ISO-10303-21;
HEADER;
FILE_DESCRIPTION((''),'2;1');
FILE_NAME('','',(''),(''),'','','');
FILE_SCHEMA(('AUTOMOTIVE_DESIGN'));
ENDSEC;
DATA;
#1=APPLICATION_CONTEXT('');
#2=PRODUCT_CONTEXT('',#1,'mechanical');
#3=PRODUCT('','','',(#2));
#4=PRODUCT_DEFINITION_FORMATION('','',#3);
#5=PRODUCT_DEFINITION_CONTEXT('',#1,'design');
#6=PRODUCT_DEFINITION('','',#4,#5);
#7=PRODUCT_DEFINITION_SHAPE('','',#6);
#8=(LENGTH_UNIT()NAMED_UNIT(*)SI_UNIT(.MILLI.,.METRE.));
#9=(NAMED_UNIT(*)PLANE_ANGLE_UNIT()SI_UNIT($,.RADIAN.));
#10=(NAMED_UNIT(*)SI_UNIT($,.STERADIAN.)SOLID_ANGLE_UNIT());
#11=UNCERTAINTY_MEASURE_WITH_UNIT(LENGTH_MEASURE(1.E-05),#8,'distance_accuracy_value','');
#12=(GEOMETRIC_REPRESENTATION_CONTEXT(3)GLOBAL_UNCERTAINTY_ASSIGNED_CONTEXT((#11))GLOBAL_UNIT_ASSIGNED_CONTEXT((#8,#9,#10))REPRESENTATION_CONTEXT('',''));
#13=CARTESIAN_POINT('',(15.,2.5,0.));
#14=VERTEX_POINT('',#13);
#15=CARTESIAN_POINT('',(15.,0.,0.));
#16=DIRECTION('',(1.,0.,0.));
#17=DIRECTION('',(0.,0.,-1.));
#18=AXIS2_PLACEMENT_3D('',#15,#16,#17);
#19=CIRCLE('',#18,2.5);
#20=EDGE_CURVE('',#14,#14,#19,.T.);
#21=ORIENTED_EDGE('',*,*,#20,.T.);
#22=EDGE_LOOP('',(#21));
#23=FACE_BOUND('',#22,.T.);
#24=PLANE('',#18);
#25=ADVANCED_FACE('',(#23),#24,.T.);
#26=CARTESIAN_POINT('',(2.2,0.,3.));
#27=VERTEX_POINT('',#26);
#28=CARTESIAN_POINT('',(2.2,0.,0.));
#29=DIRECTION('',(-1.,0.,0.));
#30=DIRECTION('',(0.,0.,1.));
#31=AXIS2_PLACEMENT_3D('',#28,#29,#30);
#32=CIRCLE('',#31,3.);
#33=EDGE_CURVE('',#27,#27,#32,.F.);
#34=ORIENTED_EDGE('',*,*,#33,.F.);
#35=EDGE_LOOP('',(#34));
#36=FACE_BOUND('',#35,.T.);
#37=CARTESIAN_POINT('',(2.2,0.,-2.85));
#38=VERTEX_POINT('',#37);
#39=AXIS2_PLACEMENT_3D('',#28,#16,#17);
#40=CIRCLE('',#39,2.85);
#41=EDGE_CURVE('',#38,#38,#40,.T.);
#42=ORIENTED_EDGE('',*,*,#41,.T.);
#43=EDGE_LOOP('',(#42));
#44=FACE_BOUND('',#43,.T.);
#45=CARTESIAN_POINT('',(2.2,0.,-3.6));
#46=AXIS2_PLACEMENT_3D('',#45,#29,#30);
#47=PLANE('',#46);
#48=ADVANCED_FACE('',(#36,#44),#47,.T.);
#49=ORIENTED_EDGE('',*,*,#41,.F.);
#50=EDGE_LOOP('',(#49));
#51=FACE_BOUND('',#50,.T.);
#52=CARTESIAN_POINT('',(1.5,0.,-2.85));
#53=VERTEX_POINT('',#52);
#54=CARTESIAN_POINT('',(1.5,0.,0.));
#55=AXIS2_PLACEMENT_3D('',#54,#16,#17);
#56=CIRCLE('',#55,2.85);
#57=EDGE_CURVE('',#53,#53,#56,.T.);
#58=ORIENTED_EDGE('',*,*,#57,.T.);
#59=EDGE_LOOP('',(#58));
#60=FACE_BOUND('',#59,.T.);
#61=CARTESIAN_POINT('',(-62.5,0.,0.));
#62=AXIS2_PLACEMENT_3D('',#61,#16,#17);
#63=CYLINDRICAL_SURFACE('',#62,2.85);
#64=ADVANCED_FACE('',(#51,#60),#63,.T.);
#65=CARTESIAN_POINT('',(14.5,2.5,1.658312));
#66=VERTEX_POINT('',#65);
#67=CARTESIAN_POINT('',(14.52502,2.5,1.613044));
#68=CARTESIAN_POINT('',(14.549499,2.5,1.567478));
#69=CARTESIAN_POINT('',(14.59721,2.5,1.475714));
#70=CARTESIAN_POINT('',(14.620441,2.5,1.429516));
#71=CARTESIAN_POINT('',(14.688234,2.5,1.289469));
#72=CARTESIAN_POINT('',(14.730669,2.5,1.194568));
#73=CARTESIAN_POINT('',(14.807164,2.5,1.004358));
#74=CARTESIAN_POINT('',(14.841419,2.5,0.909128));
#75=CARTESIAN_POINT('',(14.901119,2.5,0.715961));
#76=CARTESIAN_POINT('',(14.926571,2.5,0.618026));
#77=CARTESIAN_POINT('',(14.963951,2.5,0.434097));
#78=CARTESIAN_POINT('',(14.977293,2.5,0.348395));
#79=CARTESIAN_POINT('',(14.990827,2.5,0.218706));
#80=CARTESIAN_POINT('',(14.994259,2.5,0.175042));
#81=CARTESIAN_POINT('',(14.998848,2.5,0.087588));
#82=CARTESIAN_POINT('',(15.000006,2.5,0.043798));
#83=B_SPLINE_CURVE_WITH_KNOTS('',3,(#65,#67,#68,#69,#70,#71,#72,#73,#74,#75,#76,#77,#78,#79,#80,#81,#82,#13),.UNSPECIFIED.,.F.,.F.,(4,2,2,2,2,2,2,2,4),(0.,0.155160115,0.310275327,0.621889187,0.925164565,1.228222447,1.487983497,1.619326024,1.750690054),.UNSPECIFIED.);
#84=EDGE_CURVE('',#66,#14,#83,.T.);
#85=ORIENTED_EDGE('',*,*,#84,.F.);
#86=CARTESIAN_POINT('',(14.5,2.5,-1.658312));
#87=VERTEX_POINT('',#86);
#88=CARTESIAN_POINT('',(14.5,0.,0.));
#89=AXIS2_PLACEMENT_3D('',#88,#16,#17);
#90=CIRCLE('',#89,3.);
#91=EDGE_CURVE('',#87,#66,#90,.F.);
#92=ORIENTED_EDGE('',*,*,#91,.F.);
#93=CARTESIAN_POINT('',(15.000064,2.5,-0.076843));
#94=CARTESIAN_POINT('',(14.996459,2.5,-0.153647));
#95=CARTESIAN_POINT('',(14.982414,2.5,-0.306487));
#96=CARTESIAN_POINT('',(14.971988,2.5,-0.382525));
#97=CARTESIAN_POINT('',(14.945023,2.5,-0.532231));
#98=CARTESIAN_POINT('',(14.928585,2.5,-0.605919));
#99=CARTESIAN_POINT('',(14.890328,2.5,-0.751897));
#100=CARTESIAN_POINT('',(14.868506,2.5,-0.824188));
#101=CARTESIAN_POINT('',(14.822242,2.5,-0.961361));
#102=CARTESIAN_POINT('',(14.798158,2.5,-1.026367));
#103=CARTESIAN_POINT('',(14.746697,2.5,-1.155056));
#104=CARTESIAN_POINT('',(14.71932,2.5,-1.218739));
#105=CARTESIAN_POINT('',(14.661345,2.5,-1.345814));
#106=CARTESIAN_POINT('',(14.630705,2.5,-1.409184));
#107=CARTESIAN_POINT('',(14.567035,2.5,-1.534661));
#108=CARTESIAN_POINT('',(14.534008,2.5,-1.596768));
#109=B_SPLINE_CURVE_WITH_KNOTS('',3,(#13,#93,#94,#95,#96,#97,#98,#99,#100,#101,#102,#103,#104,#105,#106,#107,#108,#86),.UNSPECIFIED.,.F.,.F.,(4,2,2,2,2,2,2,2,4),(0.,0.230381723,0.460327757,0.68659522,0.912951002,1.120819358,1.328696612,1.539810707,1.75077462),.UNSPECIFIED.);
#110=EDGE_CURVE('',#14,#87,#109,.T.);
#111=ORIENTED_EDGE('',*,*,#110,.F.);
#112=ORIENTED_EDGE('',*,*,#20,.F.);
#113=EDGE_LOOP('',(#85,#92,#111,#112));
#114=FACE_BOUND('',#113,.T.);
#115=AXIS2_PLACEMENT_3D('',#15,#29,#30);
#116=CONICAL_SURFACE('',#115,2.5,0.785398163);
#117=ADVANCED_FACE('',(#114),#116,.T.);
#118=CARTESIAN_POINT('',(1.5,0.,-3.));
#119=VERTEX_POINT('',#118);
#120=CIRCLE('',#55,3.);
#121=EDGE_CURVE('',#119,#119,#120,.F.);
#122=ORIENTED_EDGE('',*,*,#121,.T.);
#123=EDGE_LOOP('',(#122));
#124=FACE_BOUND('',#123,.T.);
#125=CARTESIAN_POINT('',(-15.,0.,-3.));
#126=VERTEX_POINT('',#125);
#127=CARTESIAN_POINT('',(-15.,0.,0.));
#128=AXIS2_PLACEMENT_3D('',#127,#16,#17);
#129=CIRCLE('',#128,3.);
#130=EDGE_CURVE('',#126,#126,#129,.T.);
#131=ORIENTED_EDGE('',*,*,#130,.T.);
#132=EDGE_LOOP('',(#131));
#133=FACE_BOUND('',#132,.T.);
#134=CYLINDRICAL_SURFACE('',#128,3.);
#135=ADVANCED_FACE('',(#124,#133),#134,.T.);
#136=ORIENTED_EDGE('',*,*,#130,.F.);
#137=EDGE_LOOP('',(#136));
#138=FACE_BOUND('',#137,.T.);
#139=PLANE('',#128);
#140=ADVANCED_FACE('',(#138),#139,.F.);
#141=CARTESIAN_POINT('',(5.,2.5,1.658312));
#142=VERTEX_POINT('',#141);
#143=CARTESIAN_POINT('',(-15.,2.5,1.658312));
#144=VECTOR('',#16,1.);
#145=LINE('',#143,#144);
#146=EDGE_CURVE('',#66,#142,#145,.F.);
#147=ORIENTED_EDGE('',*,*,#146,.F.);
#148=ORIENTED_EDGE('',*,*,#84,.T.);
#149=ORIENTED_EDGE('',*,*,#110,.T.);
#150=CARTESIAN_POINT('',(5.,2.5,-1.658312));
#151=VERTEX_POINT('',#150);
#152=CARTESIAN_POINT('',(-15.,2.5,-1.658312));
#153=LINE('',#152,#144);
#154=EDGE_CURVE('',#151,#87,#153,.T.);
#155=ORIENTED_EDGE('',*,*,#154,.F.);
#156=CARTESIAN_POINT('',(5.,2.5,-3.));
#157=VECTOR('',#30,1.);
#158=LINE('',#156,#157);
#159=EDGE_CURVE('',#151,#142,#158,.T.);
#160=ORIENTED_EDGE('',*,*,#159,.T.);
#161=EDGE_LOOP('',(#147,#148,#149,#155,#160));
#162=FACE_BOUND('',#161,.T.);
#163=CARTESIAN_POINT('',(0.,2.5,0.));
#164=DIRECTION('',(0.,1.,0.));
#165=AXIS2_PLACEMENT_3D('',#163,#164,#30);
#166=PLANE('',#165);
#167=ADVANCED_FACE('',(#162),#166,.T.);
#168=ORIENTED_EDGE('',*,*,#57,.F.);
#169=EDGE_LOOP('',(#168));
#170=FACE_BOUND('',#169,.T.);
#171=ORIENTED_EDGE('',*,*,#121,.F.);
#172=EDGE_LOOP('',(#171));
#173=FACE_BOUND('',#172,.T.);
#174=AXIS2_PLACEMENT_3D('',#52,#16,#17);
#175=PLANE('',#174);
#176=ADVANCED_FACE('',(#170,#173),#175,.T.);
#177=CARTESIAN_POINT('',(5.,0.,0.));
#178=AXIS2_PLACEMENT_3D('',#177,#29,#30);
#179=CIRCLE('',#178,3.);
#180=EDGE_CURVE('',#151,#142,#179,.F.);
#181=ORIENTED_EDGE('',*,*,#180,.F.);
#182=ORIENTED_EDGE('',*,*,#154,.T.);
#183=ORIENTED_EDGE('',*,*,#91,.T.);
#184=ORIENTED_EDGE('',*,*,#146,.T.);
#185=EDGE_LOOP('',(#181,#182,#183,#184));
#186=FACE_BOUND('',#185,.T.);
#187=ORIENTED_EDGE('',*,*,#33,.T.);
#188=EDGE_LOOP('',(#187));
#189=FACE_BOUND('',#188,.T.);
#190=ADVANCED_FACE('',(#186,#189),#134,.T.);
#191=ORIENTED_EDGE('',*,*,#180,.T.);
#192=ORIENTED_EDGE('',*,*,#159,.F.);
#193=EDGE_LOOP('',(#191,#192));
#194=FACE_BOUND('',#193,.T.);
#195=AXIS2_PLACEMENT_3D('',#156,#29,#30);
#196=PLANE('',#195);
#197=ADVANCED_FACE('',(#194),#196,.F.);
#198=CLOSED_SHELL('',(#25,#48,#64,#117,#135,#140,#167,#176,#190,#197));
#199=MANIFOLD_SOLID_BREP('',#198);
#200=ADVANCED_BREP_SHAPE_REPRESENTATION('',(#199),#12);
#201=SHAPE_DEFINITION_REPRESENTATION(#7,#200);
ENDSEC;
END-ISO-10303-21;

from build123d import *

# Parameters (mm, degrees)
BODYS_R       = 3
BODY_DEPTH    = 15
FLATS_W       = 10
FLATS_H       = 6
FLAT_DEPTH    = 0.5
GROOVES_W     = 0.75
GROOVES_H     = 0.7
CHAMFER1_SIZE = 0.5


with BuildPart() as part:
    # BodyS → Body (new, symmetric)
    with BuildSketch(Plane(origin=(0, 0, 0), x_dir=(0, 0, -1), z_dir=(1, 0, 0))):
        Circle(BODYS_R)
    extrude(amount=BODY_DEPTH, both=True)

    # FlatS → Flat (cut)
    with BuildSketch(Plane(origin=(0, 3, 0), x_dir=(1, 0, 0), z_dir=(0, 1, 0))):
        with Locations((10, 0)):
            Rectangle(FLATS_W, FLATS_H)
    extrude(amount=-FLAT_DEPTH, mode=Mode.SUBTRACT)

    # GrooveS → Groove for ANSI B27.7 - 3AM1-6, Basic External Retaining Ring1 (revolve, cut)
    with BuildSketch(Plane(origin=(-15, 0, 0), x_dir=(0, 0, -1), z_dir=(0, -1, 0))):
        with Locations((3.225, 16.85)):
            Rectangle(GROOVES_W, GROOVES_H)
    revolve(axis=Axis((-62.5, 0, 0), (1, 0, 0)), mode=Mode.SUBTRACT)

    # Chamfer1
    chamfer1_edges = [part.edges().sort_by_distance(p)[0] for p in [
        (15, -2.643382037, 1.418637165),
    ]]
    chamfer(chamfer1_edges, length=CHAMFER1_SIZE - 0.0001)  # a hair under: the kernel refuses the full size


solid = part.part
